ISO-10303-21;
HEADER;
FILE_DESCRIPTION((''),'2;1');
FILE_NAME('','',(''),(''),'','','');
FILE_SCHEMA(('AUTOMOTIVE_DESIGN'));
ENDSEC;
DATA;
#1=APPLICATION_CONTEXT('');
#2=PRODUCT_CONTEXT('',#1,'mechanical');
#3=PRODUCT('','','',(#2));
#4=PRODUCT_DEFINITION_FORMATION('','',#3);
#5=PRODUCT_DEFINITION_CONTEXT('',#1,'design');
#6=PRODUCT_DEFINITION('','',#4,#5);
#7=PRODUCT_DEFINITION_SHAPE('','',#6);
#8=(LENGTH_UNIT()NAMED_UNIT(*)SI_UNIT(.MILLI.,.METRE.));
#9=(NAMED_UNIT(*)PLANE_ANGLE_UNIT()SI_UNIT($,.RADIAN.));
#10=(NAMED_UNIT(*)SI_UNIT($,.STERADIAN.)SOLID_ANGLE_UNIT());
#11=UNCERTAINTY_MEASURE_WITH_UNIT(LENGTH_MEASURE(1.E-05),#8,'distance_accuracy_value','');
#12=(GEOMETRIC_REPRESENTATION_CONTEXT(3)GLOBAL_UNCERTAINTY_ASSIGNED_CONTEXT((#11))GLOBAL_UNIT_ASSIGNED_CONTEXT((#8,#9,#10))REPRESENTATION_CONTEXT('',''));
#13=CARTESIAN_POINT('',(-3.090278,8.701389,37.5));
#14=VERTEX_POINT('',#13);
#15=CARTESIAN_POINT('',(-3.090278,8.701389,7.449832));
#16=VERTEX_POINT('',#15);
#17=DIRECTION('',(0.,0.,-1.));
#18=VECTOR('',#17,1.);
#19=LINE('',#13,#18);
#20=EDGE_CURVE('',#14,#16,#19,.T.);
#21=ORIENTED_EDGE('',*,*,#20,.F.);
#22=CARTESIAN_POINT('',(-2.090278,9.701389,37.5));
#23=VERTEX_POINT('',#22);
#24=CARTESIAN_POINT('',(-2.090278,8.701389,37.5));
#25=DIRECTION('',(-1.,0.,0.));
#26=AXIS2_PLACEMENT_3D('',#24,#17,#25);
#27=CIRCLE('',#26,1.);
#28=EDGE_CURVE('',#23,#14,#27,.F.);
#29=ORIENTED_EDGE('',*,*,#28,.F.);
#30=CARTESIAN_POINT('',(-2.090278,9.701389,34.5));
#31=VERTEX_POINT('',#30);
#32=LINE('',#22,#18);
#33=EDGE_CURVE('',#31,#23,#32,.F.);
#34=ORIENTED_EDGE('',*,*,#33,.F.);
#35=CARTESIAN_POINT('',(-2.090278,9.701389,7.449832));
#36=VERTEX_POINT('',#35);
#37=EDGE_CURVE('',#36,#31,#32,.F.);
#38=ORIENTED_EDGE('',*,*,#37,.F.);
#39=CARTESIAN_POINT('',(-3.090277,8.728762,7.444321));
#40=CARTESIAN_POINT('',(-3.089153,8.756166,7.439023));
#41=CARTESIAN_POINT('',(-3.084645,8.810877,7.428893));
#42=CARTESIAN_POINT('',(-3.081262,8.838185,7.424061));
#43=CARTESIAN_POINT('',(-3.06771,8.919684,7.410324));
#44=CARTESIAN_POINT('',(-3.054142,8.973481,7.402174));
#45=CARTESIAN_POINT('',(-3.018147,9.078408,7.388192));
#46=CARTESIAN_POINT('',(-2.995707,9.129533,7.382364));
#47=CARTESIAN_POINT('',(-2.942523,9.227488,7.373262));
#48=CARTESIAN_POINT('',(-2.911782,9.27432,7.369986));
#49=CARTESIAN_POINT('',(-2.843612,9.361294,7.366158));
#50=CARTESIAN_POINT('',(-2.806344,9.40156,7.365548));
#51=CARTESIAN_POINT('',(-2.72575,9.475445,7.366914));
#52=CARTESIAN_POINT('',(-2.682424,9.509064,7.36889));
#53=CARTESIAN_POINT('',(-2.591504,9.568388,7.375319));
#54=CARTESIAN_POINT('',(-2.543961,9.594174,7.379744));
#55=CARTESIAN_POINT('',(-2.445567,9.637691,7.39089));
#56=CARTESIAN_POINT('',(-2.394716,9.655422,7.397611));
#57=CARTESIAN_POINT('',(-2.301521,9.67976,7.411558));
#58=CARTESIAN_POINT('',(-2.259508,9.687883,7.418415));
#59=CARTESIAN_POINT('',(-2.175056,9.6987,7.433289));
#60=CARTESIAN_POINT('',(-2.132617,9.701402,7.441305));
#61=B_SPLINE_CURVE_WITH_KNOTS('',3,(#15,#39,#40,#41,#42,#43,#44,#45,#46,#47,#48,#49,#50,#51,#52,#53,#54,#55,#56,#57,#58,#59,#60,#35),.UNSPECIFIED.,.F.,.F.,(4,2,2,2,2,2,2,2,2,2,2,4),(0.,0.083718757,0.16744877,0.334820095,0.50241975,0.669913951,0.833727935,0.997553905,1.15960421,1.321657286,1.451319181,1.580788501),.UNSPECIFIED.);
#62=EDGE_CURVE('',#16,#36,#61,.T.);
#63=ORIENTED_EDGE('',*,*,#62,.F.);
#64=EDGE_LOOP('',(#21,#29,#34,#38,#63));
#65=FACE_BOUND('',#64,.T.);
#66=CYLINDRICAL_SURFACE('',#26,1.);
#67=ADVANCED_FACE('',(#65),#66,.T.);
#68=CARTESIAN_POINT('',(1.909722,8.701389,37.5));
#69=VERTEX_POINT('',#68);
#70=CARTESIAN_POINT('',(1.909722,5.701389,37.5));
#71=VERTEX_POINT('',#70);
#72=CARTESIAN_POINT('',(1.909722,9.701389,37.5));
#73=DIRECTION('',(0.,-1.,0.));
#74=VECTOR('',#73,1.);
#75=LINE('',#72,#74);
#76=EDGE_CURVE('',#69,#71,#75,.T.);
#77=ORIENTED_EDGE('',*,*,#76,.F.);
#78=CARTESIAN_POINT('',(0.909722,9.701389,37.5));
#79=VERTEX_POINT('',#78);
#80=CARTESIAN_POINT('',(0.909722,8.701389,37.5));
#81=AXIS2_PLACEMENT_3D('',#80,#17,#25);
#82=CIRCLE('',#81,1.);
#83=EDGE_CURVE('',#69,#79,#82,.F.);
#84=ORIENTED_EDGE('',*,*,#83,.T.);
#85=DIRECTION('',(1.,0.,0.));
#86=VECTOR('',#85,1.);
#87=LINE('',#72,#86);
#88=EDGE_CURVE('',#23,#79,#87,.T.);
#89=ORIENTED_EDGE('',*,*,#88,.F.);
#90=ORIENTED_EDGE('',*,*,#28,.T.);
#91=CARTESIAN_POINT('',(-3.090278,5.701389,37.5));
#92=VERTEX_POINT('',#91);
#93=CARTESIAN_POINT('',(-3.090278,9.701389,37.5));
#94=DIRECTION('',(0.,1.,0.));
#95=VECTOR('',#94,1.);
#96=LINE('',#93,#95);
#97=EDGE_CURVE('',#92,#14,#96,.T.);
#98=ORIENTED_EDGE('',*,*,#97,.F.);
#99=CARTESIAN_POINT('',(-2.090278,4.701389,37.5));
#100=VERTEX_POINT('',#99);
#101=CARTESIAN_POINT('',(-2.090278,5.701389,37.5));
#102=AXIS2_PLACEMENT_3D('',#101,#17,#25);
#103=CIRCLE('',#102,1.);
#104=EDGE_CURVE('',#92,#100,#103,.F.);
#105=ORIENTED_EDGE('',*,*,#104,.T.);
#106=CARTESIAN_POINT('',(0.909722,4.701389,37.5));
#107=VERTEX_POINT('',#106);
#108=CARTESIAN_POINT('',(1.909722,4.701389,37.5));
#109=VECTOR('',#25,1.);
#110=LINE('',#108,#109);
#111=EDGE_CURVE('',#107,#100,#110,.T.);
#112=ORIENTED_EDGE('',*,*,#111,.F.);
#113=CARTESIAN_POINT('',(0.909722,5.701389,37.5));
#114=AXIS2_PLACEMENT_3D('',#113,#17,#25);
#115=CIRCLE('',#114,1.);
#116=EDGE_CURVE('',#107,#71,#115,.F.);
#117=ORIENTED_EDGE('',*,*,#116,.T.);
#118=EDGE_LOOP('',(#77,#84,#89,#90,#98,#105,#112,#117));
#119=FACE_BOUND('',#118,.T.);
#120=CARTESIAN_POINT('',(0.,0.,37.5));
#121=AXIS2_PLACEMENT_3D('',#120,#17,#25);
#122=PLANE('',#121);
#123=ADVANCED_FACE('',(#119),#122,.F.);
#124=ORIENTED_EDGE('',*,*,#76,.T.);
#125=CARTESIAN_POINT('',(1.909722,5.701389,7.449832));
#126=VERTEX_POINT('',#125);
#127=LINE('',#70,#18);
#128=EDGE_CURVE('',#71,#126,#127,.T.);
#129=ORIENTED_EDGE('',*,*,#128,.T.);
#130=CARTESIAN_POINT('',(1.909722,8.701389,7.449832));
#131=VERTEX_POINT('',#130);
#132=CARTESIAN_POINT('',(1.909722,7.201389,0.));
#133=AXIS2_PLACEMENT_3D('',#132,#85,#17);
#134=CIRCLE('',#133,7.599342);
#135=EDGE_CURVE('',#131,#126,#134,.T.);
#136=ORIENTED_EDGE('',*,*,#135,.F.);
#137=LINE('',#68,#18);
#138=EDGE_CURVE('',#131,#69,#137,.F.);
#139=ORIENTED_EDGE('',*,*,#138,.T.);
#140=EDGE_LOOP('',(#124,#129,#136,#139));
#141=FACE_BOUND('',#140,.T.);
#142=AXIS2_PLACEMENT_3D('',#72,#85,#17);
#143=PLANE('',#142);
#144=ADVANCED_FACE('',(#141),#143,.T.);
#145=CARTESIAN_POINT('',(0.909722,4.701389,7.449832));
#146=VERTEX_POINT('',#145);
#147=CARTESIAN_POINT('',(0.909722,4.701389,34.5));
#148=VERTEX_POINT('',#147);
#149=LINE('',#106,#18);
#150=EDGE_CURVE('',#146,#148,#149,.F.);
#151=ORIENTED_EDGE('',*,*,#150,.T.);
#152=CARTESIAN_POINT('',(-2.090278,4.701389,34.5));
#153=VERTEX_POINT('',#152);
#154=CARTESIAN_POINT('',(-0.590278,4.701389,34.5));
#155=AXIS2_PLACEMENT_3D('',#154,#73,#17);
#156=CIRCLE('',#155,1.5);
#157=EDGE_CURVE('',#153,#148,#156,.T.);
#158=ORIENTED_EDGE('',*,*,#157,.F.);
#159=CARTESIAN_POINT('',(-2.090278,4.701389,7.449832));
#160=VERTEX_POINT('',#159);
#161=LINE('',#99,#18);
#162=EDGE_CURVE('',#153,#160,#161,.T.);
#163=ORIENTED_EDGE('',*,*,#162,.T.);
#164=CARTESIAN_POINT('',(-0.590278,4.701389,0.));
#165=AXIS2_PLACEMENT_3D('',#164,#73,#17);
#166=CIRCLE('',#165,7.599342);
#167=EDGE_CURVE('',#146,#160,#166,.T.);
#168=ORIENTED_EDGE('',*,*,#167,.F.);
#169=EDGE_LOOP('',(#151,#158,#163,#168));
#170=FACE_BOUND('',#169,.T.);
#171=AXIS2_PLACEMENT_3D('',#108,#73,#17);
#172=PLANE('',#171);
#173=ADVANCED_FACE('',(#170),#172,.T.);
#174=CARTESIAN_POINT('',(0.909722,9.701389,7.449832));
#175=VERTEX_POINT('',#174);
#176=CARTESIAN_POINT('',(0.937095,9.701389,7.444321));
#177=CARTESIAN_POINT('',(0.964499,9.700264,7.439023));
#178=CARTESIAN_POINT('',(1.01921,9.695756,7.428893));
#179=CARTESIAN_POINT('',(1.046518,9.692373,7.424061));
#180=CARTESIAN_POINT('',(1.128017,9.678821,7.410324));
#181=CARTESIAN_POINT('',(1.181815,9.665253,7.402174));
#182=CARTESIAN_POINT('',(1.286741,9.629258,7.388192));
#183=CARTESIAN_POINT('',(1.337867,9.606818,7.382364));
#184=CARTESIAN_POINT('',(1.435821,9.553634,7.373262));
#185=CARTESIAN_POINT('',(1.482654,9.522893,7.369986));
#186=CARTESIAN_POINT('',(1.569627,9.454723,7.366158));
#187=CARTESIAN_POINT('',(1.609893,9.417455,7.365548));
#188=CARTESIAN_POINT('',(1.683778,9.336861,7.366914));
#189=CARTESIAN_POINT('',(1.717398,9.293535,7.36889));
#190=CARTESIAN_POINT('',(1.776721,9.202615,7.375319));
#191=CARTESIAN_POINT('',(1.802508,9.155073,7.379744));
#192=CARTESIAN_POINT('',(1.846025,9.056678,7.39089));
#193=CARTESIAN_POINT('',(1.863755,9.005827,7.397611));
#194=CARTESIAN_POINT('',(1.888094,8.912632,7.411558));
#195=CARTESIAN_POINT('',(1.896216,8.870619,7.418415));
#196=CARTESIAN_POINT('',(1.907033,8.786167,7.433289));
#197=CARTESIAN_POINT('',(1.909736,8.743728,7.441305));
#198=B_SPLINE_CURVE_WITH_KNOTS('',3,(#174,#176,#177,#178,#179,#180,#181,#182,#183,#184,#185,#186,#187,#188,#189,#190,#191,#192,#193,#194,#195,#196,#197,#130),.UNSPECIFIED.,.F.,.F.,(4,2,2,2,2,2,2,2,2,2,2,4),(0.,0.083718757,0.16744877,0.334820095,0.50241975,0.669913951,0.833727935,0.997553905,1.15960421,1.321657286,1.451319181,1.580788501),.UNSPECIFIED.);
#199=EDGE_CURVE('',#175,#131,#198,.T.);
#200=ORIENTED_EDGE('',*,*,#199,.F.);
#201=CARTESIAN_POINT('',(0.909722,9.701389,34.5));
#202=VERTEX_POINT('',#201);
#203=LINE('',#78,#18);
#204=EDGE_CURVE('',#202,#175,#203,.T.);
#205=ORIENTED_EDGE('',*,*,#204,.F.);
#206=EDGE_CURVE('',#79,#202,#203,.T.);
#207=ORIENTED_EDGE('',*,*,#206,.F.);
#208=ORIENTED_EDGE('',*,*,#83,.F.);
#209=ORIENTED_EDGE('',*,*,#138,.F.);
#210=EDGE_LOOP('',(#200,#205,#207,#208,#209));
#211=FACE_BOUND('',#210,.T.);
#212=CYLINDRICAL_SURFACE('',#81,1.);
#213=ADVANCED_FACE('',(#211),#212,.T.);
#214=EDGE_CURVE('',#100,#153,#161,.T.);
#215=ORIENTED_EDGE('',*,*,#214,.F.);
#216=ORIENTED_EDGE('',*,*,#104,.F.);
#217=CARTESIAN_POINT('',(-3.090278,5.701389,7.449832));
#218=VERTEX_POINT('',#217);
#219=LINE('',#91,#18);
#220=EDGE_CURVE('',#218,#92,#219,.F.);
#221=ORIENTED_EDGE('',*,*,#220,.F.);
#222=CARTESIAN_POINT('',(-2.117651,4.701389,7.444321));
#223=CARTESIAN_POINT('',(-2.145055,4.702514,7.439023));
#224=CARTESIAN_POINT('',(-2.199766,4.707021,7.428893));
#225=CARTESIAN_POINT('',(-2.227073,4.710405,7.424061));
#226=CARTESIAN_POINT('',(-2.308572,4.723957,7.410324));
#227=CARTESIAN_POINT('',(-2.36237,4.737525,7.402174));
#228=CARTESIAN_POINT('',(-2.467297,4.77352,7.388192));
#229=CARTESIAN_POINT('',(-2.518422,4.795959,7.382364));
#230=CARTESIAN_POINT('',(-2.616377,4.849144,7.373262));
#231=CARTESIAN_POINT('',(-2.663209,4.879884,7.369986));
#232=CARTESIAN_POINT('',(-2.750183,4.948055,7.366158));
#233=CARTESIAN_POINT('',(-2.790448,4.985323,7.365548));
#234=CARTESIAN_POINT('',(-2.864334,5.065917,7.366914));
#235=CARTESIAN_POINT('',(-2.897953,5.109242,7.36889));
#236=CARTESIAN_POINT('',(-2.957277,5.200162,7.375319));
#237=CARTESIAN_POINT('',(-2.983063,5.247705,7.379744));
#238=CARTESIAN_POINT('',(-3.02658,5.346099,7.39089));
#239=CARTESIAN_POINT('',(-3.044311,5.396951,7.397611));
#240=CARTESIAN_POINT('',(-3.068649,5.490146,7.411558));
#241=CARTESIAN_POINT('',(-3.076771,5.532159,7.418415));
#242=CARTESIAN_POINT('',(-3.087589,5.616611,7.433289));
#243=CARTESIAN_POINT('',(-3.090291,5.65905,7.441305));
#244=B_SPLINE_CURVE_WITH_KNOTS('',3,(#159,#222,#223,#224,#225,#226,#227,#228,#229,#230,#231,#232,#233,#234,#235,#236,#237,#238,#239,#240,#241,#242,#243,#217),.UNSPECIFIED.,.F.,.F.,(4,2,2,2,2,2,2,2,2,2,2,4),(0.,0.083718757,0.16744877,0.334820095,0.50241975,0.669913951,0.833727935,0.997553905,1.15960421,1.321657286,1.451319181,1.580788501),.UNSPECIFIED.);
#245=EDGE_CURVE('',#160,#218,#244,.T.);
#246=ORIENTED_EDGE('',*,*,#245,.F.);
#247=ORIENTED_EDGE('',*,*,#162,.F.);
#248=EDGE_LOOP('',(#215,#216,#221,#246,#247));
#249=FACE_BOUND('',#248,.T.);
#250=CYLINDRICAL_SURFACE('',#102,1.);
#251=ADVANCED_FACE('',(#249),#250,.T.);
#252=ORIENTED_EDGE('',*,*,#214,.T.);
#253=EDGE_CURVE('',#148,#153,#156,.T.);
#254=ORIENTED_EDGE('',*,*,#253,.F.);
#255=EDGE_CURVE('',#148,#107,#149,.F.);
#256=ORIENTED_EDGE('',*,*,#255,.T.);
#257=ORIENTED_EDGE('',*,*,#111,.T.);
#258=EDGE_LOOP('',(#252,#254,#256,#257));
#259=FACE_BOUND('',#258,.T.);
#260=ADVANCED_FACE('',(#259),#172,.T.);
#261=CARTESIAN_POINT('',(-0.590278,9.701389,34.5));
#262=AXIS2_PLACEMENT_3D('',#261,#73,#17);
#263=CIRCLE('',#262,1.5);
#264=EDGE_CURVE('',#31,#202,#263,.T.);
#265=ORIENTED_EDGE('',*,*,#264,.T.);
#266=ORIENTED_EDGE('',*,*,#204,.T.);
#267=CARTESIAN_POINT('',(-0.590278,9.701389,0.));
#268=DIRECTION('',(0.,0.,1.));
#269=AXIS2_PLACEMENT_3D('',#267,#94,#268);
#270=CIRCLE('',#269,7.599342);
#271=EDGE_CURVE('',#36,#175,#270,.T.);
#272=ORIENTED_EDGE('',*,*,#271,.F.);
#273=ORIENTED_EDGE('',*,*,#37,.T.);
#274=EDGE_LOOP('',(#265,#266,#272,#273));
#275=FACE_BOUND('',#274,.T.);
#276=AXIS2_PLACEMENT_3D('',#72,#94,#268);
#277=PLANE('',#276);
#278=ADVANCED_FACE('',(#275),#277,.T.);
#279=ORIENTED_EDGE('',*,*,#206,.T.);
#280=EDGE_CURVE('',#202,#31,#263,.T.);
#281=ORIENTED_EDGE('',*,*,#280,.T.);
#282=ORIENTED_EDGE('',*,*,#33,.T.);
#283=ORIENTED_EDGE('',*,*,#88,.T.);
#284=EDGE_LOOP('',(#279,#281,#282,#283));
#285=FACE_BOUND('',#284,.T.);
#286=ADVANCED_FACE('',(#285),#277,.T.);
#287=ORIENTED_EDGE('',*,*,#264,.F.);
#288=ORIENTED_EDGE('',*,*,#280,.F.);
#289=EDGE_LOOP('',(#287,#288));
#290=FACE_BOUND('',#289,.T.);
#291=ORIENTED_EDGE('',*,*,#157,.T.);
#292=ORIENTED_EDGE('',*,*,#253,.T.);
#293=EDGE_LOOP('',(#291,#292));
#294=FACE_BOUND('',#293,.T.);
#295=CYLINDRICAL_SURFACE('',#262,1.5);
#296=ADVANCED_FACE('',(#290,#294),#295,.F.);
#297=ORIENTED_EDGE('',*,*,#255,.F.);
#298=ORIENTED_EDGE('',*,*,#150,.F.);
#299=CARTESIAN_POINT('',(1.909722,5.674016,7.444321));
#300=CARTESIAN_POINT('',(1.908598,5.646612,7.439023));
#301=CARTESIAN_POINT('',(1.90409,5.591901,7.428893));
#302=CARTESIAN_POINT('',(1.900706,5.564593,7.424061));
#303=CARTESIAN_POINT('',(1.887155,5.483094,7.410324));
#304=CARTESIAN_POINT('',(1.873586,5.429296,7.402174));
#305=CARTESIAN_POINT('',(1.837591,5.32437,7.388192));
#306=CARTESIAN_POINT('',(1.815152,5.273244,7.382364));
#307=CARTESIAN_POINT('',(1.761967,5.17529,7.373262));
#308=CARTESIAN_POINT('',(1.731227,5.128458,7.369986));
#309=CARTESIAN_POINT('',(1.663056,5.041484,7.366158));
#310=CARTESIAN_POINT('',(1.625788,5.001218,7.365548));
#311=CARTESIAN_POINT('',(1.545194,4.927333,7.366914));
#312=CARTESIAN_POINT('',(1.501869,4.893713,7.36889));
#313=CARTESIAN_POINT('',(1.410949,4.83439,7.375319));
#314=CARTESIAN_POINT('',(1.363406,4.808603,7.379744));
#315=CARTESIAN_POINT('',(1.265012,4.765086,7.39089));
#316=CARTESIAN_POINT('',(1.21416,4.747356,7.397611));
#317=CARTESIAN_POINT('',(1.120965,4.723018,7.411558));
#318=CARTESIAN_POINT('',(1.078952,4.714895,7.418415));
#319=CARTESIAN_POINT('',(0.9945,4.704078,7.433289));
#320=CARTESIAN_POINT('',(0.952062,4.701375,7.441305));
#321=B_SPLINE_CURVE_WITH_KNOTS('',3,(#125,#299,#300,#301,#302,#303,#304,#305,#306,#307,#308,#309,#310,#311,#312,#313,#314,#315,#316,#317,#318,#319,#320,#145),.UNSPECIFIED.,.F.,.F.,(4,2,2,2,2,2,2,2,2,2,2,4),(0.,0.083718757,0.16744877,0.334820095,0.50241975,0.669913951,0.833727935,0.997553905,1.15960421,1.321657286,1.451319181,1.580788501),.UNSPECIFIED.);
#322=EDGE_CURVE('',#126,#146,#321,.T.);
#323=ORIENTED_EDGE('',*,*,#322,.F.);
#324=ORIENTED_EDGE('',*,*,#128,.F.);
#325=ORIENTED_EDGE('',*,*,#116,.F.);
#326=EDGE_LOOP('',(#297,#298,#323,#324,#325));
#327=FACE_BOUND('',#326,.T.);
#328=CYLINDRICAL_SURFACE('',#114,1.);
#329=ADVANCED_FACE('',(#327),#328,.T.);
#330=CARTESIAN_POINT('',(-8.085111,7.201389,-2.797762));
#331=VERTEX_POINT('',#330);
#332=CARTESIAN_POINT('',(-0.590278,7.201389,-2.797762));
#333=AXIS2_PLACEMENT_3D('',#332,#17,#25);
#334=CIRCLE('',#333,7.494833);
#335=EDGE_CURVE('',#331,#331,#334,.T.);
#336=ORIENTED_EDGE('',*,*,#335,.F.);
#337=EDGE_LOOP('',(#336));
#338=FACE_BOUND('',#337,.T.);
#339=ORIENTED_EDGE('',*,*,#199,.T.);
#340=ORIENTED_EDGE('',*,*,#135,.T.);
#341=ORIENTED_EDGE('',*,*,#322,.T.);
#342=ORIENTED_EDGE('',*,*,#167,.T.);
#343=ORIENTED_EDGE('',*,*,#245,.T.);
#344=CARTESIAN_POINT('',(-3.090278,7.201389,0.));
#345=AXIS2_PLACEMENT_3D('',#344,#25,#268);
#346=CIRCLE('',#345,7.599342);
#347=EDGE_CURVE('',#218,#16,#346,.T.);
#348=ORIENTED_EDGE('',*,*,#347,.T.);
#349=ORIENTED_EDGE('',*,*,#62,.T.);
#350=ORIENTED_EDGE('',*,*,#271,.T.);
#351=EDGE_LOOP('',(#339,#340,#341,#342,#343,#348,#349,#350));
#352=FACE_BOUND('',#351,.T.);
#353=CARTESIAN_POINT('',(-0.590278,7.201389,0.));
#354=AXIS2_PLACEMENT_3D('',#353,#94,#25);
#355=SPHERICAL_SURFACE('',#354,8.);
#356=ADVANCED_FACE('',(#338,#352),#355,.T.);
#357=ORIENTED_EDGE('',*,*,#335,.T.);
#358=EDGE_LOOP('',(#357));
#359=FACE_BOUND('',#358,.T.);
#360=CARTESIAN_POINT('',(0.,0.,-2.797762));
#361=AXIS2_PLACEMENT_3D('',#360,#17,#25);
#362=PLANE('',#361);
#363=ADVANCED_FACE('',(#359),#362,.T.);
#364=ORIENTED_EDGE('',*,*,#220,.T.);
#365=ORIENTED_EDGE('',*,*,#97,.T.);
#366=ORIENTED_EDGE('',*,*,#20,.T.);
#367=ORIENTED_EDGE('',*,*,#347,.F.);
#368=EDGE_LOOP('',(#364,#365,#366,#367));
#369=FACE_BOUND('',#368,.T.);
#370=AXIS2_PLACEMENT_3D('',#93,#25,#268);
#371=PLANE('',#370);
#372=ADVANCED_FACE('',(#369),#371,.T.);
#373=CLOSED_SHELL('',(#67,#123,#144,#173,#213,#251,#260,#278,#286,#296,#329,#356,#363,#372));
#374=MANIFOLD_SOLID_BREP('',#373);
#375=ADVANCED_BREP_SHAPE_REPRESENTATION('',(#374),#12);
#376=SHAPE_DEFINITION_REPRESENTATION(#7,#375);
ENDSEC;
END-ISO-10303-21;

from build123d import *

# Parameters (mm, degrees)
SKETCH3_W           = 5
SKETCH3_H           = 5
BOSS_EXTRUDE1_DEPTH = 37.5
SKETCH4_R           = 1.5
CUT_EXTRUDE1_DEPTH  = 5
SKETCH5_W           = 3.469365962
SKETCH5_H           = 1.189282553
BOSS_EXTRUDE2_DEPTH = 8
SKETCH6_W           = 20.090906928
SKETCH6_H           = 16.444349254
CUT_EXTRUDE2_DEPTH  = 10.5
FILLET5_R           = 1
FILLET6_R           = 1
FILLET7_R           = 1
FILLET8_R           = 1


with BuildPart() as part:
    # Sketch1 → Revolve1 (revolve)
    with BuildSketch(Plane.XY):
        with BuildLine():
            Line((-0.590277778, 15.201388889), (-0.590277778, -0.798611111))
            ThreePointArc((-0.590277778, -0.798611111), (7.409722222, 7.201388889), (-0.590277778, 15.201388889))
        make_face()
    revolve(axis=Axis((-0.590277778, 15.201388889, 0), (0, -1, 0)))

    # Sketch3 → Boss-Extrude1 (add)
    with BuildSketch(Plane(origin=(0, 0, 0), x_dir=(-1, 0, 0), z_dir=(0, 0, -1))):
        with Locations((0.590277778, 7.201388889)):
            Rectangle(SKETCH3_W, SKETCH3_H)
    extrude(amount=-BOSS_EXTRUDE1_DEPTH)

    # Sketch4 → Cut-Extrude1 (cut)
    with BuildSketch(Plane.XZ.offset(-4.701388889)):
        with Locations(Location((-0.590277778, 34.5, 0), (0, 0, 270))):
            Circle(SKETCH4_R)
    extrude(amount=-CUT_EXTRUDE1_DEPTH, mode=Mode.SUBTRACT)


with BuildPart() as body_2:
    # Sketch5 → Boss-Extrude2 (new body)
    with BuildSketch(Plane(origin=(0, 0, 0), x_dir=(1, 0, 0), z_dir=(0, 1, 0))):
        with Locations((0, 12.70312089)):
            Rectangle(SKETCH5_W, SKETCH5_H)
    extrude(amount=BOSS_EXTRUDE2_DEPTH)


with BuildPart() as cut_extrude2_tool:
    # Sketch6 → Cut-Extrude2 (new body)
    with BuildSketch(Plane(origin=(0, 0, -13.297762167), x_dir=(-1, 0, 0), z_dir=(0, 0, -1))):
        with Locations((0.125748138, 7.050416756)):
            Rectangle(SKETCH6_W, SKETCH6_H)
    extrude(amount=-CUT_EXTRUDE2_DEPTH)


with BuildPart() as part_1:
    add(part.part)

    # Cut-Extrude2: cut by cut_extrude2_tool
    add(cut_extrude2_tool.part, mode=Mode.SUBTRACT)

    # Fillet5
    fillet5_edges = [part_1.edges().sort_by_distance(p)[0] for p in [
        (-3.090277778, 9.701388889, 22.338175024),
    ]]
    fillet(fillet5_edges, radius=FILLET5_R - 0.0001)  # a hair under: the kernel refuses the full size

    # Fillet6
    fillet6_edges = [part_1.edges().sort_by_distance(p)[0] for p in [
        (1.909722222, 9.701388889, 22.338175024),
    ]]
    fillet(fillet6_edges, radius=FILLET6_R)

    # Fillet7
    fillet7_edges = [part_1.edges().sort_by_distance(p)[0] for p in [
        (1.909722222, 4.701388889, 22.338175024),
    ]]
    fillet(fillet7_edges, radius=FILLET7_R)

    # Fillet8
    fillet8_edges = [part_1.edges().sort_by_distance(p)[0] for p in [
        (-3.090277778, 4.701388889, 22.338175024),
    ]]
    fillet(fillet8_edges, radius=FILLET8_R - 0.0001)  # a hair under: the kernel refuses the full size


with BuildPart() as body_2_1:
    add(body_2.part)

    # Cut-Extrude2: cut by cut_extrude2_tool
    add(cut_extrude2_tool.part, mode=Mode.SUBTRACT)


solid = part_1.part
